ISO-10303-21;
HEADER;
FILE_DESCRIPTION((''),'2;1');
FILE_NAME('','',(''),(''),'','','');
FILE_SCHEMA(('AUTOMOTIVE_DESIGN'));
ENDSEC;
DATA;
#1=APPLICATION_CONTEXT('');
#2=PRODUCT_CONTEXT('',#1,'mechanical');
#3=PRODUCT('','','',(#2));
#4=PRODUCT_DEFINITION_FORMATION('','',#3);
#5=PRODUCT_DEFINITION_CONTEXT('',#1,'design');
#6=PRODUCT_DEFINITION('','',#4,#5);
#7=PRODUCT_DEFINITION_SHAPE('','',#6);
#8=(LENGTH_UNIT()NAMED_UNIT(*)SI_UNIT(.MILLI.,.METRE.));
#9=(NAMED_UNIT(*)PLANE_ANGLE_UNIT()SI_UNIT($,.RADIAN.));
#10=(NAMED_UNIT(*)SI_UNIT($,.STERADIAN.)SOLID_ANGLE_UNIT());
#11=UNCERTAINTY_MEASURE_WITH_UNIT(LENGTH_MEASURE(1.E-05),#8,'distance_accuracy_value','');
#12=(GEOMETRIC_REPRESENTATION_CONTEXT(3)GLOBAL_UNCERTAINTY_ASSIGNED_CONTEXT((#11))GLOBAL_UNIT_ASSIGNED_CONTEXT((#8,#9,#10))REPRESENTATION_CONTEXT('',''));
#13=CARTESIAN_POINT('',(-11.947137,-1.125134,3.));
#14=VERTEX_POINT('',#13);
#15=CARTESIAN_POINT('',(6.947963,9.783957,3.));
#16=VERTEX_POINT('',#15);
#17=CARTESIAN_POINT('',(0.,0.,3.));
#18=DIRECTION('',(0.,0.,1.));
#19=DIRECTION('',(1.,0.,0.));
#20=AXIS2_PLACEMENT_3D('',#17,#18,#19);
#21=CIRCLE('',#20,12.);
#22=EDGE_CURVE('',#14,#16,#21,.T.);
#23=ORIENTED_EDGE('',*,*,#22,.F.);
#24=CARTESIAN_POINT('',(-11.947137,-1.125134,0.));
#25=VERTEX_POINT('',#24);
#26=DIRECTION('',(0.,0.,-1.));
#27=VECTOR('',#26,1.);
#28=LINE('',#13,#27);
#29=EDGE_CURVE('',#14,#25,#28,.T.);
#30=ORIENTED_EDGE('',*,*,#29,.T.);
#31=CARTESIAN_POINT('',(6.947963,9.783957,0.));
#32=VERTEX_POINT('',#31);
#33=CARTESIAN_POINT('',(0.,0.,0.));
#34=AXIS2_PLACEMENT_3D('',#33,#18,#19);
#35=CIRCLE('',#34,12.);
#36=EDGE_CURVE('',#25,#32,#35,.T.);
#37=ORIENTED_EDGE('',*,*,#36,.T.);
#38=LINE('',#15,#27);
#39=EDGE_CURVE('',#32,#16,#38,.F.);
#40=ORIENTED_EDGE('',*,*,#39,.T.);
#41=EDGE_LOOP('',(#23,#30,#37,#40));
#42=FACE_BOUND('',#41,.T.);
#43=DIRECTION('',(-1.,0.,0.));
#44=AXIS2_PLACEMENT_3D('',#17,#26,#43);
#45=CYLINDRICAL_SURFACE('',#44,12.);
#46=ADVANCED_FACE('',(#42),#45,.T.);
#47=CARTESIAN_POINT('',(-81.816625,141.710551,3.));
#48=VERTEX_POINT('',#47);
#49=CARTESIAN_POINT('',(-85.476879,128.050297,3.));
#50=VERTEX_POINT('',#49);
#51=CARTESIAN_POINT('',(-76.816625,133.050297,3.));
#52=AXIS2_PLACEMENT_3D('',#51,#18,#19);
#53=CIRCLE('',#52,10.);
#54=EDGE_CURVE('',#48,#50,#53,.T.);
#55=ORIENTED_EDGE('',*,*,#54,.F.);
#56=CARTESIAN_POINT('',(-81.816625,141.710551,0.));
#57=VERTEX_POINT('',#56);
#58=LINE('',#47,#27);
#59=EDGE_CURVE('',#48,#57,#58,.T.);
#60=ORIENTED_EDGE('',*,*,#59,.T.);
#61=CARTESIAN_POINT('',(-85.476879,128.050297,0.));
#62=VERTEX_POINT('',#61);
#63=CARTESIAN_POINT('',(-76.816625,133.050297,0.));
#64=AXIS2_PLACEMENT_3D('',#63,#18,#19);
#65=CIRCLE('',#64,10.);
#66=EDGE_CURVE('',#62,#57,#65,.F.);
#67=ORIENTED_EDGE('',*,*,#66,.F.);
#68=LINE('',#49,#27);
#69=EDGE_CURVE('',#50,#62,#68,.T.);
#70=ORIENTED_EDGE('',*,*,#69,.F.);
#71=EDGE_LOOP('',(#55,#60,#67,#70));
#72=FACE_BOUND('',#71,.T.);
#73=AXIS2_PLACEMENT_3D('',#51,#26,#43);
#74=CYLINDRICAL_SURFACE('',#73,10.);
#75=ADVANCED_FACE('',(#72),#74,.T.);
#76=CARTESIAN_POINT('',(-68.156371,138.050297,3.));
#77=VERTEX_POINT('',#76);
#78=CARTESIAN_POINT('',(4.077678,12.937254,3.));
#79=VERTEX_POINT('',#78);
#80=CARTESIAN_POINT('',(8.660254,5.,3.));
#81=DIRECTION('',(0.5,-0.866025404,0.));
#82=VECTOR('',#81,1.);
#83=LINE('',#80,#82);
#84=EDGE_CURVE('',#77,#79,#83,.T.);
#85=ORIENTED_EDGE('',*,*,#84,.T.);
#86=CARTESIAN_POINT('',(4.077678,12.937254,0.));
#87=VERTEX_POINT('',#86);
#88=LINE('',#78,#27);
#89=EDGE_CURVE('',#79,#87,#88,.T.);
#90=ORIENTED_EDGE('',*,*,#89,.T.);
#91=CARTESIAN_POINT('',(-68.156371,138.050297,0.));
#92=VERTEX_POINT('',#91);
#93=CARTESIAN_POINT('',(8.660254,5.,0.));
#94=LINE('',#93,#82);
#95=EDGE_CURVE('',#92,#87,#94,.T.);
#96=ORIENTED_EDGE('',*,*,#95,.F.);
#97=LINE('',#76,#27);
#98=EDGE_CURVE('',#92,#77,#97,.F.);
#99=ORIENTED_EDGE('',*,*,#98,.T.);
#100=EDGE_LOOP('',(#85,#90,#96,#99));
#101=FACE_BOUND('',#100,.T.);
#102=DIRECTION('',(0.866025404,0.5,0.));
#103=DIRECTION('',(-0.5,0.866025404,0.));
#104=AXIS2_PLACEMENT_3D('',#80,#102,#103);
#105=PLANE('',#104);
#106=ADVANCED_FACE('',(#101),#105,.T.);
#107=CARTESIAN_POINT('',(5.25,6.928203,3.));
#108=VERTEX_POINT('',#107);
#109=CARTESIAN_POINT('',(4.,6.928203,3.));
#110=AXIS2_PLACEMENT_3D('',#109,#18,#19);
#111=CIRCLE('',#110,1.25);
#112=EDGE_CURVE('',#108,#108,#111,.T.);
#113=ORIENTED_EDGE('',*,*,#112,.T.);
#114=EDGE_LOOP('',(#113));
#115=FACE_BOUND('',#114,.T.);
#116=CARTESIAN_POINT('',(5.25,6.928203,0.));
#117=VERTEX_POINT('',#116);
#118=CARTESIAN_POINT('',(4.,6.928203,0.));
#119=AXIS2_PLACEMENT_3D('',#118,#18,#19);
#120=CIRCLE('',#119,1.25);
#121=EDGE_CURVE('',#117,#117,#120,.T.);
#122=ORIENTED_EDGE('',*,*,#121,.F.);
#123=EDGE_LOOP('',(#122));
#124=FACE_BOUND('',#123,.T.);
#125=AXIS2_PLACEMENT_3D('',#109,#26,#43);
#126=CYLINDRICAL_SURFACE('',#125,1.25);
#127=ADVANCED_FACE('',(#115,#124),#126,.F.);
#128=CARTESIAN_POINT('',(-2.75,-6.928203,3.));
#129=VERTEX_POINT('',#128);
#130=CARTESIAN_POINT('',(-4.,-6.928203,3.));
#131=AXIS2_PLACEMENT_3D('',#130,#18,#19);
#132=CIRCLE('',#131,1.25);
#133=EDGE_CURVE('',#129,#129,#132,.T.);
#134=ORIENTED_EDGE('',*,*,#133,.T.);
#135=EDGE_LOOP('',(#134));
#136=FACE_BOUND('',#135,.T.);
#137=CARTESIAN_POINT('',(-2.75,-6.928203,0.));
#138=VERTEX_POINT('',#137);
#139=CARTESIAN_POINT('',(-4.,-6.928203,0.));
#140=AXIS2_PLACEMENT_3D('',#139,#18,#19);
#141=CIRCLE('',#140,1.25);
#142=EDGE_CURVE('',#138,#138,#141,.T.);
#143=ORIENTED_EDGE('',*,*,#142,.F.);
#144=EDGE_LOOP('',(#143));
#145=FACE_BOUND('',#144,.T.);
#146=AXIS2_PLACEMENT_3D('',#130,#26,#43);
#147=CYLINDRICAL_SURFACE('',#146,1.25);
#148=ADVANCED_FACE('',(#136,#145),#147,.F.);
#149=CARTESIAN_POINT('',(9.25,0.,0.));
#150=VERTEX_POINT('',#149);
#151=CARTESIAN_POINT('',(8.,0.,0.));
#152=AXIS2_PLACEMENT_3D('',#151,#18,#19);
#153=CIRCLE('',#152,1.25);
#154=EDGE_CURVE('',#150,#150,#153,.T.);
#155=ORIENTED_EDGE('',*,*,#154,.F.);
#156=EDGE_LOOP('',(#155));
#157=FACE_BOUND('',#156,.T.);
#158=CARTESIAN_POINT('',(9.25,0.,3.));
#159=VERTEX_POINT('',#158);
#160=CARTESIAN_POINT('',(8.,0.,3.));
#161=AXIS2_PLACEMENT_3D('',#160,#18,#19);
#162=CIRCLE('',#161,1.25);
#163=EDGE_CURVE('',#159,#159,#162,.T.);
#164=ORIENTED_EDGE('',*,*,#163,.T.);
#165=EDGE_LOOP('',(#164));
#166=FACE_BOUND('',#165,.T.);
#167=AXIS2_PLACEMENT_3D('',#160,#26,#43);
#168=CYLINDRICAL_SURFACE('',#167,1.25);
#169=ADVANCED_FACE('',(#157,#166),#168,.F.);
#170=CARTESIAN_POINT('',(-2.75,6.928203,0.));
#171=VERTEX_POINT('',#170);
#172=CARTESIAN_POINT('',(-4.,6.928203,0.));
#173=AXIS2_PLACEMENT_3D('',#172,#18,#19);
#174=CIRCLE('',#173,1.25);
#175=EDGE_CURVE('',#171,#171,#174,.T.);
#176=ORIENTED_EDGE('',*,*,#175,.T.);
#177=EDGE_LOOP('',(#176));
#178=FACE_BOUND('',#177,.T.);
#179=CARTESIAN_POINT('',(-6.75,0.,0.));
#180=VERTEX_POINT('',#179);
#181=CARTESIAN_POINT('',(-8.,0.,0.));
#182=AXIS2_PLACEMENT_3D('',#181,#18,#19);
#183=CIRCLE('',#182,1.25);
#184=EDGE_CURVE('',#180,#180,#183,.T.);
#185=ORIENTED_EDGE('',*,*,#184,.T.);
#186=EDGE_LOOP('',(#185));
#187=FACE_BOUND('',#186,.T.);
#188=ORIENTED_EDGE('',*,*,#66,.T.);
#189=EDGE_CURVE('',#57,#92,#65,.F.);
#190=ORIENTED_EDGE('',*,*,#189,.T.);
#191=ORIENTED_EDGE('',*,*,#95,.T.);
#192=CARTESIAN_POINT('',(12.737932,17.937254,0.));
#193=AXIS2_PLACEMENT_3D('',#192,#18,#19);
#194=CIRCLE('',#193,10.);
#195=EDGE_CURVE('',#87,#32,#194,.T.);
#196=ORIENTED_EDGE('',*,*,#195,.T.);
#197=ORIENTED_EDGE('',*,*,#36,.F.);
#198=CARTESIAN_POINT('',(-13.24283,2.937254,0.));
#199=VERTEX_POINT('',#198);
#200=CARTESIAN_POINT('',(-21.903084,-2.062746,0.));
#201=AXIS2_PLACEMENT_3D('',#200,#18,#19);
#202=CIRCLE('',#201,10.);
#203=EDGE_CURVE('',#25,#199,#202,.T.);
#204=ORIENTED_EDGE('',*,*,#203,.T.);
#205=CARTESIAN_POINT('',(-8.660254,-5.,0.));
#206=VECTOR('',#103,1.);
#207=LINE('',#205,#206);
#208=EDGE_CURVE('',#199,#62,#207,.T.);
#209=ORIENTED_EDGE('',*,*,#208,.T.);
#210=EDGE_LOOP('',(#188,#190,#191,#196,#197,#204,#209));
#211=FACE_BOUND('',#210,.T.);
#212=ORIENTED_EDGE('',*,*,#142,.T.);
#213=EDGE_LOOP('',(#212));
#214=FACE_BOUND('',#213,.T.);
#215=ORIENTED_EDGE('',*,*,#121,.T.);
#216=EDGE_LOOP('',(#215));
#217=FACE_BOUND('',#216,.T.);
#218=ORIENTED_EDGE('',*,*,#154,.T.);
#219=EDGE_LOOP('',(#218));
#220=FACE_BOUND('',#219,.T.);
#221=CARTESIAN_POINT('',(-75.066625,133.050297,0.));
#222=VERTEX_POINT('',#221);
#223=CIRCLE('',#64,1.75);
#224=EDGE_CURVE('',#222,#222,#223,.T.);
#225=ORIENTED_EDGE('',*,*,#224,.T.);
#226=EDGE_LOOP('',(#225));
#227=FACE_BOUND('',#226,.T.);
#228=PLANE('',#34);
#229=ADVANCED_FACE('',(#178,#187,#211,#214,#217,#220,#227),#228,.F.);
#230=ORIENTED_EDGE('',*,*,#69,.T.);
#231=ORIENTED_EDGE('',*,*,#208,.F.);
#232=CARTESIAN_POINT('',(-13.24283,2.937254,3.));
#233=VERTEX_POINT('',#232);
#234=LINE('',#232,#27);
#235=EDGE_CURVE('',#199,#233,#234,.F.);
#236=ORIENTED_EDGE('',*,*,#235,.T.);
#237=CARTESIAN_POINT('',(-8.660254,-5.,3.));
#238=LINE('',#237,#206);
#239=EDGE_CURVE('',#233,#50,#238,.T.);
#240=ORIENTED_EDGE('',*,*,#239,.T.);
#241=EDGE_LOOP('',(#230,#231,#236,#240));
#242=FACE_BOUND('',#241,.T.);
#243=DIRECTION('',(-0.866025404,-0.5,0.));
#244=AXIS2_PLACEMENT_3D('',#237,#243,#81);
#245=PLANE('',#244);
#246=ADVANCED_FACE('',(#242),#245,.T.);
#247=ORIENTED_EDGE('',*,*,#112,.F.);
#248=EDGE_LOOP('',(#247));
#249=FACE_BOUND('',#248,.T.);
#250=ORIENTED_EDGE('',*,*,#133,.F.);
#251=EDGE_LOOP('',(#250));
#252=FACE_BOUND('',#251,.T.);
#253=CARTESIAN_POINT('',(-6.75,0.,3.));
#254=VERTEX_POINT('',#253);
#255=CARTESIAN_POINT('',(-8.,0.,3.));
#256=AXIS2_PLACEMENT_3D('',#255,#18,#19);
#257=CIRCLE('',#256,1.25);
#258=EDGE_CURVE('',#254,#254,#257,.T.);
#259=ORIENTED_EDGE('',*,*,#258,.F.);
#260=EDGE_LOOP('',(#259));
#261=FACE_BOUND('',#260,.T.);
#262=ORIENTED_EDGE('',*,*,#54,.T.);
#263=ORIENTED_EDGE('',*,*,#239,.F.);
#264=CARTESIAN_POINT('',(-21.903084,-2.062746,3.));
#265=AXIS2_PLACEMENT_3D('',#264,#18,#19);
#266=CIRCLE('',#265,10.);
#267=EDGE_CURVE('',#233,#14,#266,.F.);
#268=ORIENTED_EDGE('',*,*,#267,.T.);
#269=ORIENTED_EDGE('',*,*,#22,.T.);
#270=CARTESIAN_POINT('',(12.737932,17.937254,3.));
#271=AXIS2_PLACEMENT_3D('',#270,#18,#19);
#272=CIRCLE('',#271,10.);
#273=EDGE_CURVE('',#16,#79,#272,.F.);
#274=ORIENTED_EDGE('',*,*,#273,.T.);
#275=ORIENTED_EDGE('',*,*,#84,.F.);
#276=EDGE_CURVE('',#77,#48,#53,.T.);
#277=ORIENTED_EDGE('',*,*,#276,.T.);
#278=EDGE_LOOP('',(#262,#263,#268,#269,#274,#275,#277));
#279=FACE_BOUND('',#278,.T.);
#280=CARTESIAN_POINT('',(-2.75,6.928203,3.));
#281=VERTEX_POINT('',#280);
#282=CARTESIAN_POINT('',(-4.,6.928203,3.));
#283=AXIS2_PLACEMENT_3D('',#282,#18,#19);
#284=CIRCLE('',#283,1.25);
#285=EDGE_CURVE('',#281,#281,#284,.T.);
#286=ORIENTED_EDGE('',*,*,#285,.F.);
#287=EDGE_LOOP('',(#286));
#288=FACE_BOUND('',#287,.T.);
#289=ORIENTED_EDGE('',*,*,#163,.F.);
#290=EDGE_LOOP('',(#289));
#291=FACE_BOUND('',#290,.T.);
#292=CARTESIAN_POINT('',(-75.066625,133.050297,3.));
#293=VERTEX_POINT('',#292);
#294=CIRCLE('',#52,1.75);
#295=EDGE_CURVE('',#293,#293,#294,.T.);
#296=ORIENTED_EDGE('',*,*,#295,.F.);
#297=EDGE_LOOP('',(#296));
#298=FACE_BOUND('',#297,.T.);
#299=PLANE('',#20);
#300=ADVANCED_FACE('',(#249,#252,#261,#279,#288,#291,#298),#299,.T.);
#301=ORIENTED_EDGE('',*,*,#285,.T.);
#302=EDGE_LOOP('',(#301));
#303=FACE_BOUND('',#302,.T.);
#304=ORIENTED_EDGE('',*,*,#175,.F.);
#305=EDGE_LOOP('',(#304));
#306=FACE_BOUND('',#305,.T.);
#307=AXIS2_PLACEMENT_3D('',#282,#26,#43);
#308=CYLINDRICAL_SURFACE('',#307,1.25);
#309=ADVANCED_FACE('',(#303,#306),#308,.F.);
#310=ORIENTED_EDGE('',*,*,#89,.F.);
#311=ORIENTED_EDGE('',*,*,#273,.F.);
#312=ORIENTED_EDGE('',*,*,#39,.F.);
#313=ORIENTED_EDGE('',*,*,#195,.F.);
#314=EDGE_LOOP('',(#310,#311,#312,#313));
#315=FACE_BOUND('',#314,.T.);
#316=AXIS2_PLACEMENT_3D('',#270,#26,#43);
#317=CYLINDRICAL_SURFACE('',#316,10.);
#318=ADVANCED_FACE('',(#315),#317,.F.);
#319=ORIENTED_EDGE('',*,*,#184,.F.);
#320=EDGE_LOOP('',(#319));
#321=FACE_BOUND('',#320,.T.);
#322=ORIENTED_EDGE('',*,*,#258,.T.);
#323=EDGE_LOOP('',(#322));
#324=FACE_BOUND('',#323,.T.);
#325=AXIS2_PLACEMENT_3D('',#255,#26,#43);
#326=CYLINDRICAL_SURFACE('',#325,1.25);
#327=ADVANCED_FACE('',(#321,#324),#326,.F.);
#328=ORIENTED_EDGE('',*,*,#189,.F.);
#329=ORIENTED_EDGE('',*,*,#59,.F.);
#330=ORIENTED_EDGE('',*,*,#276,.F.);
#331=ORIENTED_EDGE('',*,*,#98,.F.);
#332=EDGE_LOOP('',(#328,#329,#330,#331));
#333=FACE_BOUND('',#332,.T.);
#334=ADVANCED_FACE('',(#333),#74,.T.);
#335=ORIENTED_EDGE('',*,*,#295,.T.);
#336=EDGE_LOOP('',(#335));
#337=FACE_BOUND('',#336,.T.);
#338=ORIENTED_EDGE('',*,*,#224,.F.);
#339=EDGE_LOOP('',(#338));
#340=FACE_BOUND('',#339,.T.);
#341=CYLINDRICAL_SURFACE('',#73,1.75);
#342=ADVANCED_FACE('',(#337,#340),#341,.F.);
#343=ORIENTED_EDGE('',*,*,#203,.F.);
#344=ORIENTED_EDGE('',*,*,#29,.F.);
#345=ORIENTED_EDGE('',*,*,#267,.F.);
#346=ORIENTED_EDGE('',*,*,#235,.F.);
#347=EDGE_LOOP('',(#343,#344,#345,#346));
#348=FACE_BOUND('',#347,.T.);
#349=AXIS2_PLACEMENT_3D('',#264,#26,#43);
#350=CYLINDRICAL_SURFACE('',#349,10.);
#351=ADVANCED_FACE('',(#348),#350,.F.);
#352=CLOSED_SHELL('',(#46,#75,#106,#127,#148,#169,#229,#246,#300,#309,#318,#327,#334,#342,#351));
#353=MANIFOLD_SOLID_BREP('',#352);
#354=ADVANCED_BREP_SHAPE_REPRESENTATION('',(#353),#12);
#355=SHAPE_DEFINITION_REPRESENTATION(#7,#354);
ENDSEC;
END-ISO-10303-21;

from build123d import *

# Parameters (mm, degrees)
SKETCH1_R           = 1.75
SKETCH1_R_2         = 1.25
BOSS_EXTRUDE1_DEPTH = 3
FILLET1_R           = 10


with BuildPart() as part:
    # Sketch1 → Boss-Extrude1 (new body)
    with BuildSketch(Plane.XY):
        with BuildLine():
            Line((-90.476878828, 136.710551041), (-11.976878828, 0.744562647))
            ThreePointArc((-11.976878828, 0.744562647), (6, -10.392304845), (5.343629247, 10.744562647))
            Line((5.343629247, 10.744562647), (-73.156370753, 146.710551041))
            Line((-73.156370753, 146.710551041), (-90.476878828, 136.710551041))
        make_face()
        with Locations((-76.81662479, 133.050297003)):
            Circle(SKETCH1_R, mode=Mode.SUBTRACT)
        with Locations((8, 0)):
            Circle(SKETCH1_R_2, mode=Mode.SUBTRACT)
        with Locations((-4, -6.92820323)):
            Circle(SKETCH1_R_2, mode=Mode.SUBTRACT)
        with Locations((-8, 0)):
            Circle(SKETCH1_R_2, mode=Mode.SUBTRACT)
        with Locations((-4, 6.92820323)):
            Circle(SKETCH1_R_2, mode=Mode.SUBTRACT)
        with Locations((4, 6.92820323)):
            Circle(SKETCH1_R_2, mode=Mode.SUBTRACT)
    extrude(amount=BOSS_EXTRUDE1_DEPTH)

    # Fillet1
    fillet1_edges = [part.edges().sort_by_distance(p)[0] for p in [
        (-11.976878828, 0.744562647, 1.5),
        (5.343629247, 10.744562647, 1.5),
        (-90.476878828, 136.710551041, 1.5),
        (-73.156370753, 146.710551041, 1.5),
    ]]
    fillet(fillet1_edges, radius=FILLET1_R - 0.0001)  # a hair under: the kernel refuses the full size


solid = part.part
